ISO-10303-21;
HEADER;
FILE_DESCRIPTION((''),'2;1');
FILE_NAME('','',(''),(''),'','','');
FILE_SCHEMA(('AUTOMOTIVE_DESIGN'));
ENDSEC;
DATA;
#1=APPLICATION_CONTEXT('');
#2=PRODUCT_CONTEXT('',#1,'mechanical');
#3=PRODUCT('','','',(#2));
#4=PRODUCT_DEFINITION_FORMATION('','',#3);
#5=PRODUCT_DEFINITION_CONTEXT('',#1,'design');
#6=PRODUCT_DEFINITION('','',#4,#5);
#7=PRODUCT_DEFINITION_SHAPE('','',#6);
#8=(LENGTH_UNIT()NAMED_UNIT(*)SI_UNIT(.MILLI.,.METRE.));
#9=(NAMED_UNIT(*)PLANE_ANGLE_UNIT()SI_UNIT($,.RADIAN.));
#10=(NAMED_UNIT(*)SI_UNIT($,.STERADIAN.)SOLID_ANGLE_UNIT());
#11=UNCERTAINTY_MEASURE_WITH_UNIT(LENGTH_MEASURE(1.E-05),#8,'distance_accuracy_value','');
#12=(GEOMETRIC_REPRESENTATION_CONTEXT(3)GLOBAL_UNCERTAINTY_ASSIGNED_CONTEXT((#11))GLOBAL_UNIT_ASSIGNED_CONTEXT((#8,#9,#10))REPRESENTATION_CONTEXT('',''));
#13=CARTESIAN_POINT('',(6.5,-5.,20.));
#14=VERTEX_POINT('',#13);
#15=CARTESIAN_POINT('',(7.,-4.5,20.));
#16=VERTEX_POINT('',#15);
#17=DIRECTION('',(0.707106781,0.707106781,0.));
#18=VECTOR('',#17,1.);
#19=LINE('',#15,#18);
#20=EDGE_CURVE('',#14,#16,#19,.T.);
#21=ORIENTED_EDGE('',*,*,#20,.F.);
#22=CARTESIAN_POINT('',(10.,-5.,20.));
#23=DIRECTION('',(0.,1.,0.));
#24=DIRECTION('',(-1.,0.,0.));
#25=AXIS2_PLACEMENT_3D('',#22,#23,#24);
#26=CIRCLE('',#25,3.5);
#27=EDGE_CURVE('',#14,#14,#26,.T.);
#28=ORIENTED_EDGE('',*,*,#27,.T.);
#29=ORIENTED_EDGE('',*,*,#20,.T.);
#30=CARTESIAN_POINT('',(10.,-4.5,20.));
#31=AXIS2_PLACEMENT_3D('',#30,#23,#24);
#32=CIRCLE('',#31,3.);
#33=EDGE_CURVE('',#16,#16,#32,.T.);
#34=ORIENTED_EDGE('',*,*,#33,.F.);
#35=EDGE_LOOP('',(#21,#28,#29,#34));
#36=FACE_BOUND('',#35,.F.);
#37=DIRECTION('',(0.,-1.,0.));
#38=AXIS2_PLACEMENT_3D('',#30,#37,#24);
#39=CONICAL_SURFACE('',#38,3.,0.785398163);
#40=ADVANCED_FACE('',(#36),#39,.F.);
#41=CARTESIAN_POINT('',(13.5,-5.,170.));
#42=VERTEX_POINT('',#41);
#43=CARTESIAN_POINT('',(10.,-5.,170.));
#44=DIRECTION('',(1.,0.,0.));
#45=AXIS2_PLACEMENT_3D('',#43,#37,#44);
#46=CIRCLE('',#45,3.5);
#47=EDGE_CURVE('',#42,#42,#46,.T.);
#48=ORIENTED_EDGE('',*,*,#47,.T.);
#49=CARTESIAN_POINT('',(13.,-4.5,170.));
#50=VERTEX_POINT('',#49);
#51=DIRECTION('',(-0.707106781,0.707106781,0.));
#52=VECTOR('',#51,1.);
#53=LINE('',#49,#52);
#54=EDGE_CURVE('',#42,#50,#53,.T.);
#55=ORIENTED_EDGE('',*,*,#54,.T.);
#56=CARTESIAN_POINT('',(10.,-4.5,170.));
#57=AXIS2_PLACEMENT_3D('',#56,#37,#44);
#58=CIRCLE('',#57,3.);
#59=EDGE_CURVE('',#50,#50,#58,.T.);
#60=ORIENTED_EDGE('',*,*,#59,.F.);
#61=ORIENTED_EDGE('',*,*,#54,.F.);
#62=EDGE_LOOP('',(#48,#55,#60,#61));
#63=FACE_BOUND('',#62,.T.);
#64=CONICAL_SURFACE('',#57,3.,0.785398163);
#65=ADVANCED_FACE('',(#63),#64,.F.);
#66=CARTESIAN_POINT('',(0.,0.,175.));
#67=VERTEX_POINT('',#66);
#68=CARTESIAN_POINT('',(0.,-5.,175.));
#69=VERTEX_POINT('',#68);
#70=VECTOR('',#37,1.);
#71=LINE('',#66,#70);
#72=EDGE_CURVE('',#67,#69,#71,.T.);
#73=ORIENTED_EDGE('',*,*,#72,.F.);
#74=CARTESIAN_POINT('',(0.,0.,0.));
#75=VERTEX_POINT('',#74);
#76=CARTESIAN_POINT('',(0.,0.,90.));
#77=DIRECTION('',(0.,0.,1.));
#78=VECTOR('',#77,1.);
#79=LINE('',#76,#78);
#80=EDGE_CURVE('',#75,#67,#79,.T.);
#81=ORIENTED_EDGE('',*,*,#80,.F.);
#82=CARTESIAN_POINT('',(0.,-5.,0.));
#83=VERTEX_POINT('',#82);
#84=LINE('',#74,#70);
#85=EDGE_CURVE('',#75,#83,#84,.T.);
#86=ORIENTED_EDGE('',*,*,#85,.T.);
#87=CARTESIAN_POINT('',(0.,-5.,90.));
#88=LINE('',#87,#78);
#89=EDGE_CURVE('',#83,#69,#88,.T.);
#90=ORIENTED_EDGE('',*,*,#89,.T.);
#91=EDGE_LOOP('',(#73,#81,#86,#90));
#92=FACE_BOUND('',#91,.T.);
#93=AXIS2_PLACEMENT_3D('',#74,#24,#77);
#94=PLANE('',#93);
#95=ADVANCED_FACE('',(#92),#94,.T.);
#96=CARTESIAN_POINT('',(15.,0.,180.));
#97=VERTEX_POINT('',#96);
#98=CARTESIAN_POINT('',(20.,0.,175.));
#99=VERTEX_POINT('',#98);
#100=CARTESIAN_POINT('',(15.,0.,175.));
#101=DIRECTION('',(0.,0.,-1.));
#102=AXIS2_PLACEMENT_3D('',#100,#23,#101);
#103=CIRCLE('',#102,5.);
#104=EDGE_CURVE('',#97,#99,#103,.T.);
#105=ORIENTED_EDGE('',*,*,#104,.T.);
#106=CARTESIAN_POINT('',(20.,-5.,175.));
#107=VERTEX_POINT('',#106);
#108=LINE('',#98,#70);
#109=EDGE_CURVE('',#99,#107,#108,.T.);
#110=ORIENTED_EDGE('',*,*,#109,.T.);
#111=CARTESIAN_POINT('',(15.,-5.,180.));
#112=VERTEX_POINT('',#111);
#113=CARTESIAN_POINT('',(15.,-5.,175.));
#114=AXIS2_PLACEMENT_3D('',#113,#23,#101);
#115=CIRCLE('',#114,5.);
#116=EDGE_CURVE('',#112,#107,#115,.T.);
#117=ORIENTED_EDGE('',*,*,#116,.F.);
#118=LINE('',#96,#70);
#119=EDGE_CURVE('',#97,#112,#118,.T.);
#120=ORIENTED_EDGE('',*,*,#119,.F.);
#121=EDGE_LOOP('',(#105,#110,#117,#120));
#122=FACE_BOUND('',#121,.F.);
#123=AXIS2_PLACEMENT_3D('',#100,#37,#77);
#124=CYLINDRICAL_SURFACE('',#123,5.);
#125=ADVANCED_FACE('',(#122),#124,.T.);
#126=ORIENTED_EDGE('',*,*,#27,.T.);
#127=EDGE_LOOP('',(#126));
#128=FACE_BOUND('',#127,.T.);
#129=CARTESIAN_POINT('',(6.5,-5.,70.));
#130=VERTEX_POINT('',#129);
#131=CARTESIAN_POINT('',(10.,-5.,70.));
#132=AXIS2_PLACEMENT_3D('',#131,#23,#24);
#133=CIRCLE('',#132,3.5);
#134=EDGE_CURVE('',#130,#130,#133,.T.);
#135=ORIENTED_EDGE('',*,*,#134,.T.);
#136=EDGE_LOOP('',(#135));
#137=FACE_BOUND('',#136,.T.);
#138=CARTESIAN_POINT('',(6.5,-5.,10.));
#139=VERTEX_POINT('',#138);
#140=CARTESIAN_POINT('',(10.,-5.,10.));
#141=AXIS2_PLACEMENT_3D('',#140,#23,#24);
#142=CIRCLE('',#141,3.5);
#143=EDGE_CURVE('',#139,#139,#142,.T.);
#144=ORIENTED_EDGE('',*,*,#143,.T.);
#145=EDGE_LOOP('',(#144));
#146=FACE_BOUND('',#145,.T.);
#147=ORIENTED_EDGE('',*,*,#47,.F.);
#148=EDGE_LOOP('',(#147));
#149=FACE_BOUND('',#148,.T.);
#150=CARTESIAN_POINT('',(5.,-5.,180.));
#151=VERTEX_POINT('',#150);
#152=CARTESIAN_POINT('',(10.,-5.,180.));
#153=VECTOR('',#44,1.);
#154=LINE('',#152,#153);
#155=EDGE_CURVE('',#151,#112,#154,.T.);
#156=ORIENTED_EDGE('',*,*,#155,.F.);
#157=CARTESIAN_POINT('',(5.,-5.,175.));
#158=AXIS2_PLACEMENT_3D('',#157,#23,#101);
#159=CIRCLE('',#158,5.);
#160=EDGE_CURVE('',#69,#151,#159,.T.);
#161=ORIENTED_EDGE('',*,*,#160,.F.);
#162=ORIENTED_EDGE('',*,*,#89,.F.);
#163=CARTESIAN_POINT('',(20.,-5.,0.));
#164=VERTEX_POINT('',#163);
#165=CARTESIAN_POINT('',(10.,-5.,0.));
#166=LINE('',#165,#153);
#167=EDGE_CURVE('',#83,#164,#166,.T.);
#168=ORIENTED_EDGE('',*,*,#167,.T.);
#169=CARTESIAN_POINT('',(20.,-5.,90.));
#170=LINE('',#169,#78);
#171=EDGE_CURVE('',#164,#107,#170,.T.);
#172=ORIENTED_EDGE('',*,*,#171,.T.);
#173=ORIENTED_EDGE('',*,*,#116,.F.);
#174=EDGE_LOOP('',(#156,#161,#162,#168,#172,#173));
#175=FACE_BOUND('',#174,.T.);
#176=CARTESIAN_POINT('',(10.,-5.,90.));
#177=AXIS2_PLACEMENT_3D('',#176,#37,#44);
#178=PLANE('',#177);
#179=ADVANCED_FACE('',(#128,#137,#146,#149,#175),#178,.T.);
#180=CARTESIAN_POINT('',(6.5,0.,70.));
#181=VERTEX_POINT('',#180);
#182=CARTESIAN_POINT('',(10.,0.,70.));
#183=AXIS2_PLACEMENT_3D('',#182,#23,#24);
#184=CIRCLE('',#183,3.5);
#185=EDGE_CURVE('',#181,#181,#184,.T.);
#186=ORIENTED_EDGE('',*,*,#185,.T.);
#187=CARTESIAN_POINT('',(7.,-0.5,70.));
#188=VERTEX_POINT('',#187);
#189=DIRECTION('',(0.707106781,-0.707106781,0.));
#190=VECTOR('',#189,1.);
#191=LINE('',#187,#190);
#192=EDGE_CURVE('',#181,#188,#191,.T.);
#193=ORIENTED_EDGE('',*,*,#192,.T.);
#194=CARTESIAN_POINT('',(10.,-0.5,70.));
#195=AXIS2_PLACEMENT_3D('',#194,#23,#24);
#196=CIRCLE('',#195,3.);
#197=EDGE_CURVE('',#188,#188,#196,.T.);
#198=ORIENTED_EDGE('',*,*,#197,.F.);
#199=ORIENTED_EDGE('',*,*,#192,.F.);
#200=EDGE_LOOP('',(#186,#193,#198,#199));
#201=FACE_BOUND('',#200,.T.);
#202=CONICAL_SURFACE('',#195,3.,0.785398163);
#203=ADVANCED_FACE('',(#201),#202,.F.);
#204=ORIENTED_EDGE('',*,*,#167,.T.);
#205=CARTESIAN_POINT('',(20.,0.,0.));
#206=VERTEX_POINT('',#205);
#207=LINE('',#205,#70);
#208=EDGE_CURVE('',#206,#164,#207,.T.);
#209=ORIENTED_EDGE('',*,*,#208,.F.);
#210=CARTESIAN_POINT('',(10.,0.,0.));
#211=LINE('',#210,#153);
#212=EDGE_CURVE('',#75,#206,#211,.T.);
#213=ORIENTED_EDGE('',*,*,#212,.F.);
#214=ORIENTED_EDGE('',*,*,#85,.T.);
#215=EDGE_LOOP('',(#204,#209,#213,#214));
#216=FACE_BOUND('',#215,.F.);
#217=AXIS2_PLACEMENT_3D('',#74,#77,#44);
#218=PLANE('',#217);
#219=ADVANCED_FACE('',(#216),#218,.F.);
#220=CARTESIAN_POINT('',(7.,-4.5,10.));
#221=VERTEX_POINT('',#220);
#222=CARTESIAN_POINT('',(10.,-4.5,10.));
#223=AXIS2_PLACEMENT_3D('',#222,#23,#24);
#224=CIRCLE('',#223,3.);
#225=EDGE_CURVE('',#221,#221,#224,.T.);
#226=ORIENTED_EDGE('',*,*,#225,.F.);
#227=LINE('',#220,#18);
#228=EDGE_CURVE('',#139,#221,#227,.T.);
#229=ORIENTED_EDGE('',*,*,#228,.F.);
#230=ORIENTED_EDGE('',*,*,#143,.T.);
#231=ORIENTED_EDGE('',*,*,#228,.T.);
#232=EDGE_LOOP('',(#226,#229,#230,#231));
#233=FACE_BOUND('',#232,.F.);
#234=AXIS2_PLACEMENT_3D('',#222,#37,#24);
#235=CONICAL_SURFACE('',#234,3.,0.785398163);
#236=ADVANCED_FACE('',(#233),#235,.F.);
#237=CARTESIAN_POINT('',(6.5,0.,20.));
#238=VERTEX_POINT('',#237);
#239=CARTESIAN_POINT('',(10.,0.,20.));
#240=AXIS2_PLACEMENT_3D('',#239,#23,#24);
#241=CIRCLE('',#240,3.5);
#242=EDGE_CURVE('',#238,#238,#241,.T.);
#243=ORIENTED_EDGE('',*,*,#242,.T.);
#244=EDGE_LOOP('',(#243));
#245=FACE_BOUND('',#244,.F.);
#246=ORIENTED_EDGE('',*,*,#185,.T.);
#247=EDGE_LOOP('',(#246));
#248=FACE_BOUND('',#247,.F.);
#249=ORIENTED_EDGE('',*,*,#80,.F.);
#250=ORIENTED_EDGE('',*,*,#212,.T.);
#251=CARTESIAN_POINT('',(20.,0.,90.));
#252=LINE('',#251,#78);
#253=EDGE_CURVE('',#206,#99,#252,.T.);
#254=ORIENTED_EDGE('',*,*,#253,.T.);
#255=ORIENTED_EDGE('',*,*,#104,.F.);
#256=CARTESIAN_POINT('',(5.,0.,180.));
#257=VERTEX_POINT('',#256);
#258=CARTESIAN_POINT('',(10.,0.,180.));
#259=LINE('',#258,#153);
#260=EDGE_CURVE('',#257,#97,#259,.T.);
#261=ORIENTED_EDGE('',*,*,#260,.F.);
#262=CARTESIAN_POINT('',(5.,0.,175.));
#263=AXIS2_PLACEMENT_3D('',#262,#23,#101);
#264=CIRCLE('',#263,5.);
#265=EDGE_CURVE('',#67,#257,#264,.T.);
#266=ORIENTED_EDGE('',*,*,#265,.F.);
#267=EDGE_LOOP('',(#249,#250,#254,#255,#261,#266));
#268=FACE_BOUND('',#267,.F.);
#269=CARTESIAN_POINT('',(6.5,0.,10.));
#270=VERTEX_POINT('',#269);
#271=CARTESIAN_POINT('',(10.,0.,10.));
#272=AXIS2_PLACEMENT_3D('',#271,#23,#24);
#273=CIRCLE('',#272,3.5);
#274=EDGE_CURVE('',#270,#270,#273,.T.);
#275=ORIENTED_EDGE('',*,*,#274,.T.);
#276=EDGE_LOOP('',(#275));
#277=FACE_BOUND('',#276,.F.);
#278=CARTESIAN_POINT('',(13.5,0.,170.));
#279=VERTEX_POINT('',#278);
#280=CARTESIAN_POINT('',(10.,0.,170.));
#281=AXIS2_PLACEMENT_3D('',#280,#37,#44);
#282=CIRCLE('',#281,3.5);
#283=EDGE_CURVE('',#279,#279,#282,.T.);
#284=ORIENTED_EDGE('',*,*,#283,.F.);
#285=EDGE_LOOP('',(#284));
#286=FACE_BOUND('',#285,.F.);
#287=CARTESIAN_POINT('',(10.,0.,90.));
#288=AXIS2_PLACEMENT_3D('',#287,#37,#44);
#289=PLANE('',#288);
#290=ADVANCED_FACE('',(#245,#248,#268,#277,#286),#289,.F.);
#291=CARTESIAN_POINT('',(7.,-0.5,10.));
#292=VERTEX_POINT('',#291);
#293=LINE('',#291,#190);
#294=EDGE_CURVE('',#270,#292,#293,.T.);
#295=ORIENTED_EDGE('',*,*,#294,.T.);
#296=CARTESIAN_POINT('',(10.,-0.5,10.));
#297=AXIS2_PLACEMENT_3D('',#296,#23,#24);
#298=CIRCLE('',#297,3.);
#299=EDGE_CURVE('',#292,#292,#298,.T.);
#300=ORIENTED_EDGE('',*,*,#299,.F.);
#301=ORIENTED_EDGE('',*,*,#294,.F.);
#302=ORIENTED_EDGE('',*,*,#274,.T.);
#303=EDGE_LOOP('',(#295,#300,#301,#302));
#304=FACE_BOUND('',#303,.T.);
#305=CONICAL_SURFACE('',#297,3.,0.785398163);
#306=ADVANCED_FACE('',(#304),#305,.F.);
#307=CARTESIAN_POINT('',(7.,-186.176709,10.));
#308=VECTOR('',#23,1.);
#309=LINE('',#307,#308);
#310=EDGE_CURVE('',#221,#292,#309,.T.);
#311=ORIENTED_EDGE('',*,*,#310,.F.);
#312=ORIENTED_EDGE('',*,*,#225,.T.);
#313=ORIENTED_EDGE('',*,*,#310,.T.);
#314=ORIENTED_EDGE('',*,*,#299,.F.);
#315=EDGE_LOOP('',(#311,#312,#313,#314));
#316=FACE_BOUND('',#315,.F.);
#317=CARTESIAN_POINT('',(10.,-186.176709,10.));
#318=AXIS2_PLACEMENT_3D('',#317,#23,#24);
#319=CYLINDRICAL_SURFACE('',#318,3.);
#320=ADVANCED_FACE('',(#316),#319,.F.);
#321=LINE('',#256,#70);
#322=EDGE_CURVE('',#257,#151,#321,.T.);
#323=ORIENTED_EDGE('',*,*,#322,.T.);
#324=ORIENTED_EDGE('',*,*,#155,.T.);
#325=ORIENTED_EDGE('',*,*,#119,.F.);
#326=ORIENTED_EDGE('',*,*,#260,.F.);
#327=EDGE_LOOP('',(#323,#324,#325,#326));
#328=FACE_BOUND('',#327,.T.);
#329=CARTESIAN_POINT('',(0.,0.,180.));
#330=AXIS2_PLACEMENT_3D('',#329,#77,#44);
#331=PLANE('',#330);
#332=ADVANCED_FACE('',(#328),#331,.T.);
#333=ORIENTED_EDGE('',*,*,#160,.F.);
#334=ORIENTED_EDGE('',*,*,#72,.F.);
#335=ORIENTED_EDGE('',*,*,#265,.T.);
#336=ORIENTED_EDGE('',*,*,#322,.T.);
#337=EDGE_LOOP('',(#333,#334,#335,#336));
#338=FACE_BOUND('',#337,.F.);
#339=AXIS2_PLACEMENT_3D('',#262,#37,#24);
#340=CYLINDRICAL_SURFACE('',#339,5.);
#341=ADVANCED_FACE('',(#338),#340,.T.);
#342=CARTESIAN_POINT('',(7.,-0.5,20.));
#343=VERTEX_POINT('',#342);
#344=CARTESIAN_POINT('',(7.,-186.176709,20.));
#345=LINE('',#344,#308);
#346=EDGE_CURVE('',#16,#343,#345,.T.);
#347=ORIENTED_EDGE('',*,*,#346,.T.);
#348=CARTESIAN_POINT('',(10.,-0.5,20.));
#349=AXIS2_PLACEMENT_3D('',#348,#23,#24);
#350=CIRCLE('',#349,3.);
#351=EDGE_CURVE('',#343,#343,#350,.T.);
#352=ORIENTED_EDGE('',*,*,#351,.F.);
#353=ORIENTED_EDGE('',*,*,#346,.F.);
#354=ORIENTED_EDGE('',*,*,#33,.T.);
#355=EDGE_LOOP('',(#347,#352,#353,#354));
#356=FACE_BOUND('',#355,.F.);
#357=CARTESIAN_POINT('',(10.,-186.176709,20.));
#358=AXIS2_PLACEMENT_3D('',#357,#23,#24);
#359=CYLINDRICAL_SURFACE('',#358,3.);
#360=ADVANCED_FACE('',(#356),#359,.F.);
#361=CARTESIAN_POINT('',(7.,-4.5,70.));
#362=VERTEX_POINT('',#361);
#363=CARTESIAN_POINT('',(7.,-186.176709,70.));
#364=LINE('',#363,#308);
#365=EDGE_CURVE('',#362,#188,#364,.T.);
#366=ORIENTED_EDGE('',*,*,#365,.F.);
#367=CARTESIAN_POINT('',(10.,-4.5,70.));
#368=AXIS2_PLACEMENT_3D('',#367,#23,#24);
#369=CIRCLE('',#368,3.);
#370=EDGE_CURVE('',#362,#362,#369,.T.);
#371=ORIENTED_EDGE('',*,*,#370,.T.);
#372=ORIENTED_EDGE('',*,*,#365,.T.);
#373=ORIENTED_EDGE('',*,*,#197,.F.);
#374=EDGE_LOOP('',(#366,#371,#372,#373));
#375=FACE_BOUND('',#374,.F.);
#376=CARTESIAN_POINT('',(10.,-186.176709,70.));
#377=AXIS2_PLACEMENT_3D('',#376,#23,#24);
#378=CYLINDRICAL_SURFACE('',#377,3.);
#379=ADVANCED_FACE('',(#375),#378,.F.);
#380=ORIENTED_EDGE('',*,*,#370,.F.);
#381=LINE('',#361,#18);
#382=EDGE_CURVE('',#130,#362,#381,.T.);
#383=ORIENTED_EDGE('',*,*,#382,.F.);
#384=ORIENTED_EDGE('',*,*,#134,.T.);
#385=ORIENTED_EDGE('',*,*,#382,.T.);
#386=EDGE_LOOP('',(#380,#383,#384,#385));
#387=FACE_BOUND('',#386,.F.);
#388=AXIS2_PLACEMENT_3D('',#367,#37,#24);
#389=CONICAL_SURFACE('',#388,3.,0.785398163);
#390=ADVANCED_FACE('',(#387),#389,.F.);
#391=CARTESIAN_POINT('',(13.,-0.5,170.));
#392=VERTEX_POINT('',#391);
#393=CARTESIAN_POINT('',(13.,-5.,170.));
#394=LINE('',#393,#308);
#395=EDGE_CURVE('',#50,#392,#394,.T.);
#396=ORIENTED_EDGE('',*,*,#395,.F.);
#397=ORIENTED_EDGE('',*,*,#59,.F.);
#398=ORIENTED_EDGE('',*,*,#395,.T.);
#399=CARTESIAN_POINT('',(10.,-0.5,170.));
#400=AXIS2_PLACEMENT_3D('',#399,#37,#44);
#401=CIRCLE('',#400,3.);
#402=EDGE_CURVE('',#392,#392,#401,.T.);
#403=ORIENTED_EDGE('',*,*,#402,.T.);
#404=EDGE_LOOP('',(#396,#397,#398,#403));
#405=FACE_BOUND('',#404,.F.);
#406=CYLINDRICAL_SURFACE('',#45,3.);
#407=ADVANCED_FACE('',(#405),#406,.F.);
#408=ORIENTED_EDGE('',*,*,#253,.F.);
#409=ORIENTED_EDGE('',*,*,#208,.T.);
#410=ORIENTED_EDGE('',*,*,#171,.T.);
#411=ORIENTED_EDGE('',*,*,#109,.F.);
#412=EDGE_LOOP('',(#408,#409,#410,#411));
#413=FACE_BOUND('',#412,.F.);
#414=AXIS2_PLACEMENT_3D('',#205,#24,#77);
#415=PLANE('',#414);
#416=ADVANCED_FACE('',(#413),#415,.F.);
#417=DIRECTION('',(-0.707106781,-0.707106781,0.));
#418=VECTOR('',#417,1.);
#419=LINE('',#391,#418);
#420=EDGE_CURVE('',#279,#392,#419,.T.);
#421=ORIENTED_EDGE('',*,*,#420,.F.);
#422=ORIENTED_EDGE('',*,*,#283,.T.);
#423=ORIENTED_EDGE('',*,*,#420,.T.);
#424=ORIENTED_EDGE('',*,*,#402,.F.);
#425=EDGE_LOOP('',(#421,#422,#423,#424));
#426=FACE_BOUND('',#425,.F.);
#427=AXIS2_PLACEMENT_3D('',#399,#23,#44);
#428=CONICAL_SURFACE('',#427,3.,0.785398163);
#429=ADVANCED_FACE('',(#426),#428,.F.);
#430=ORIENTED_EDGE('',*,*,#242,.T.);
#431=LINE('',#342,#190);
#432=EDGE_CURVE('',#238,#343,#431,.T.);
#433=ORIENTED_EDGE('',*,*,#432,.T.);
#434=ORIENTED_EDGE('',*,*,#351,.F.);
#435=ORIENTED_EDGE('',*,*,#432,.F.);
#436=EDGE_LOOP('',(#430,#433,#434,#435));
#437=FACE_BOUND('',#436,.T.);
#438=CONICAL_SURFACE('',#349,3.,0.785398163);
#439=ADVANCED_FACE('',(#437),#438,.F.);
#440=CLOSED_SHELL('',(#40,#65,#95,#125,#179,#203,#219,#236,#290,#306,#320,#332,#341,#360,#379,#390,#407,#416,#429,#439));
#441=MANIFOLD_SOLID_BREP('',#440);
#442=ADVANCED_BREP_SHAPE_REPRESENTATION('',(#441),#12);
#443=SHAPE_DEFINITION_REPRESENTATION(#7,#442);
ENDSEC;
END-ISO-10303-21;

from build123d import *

# Parameters (mm, degrees)
F0_W     = 20
F0_H     = 180
F1_DEPTH = 5
F2_R     = 3
F3_DEPTH = 5.001
F5_D     = 6
F7_D     = 6
F8_SIZE  = 0.5
F9_R     = 5


with BuildPart() as f1:
    # F0 (on Front) → F1 (new body)
    with BuildSketch(Plane.XZ):
        with Locations((10, 90)):
            Rectangle(F0_W, F0_H)
    extrude(amount=F1_DEPTH)

    # F2 (on face) → F3 (cut, through all)
    with BuildSketch(Plane.XZ.offset(5)):
        with Locations((10, 170)):
            Circle(F2_R)
    extrude(amount=-F3_DEPTH, mode=Mode.SUBTRACT)

    # F5 (through all)
    with Locations(Plane.XZ.offset(5)):
        with Locations((10, 70)):
            Hole(F5_D / 2)

    # F7 (through all)
    with Locations(Plane.XZ.offset(5)):
        with Locations((10, 10), (10, 20)):
            Hole(F7_D / 2)

    # F8
    f8_edges = [f1.edges().sort_by_distance(p)[0] for p in [
        (7, -5, 170),
        (7, 0, 170),
        (7, 0, 10),
        (7, 0, 20),
        (7, 0, 70),
        (7, -5, 10),
        (7, -5, 20),
        (7, -5, 70),
    ]]
    chamfer(f8_edges, length=F8_SIZE)

    # F9
    f9_edges = [f1.edges().sort_by_distance(p)[0] for p in [
        (20, -2.5, 180),
        (0, -2.5, 180),
    ]]
    fillet(f9_edges, radius=F9_R)


solid = f1.part
